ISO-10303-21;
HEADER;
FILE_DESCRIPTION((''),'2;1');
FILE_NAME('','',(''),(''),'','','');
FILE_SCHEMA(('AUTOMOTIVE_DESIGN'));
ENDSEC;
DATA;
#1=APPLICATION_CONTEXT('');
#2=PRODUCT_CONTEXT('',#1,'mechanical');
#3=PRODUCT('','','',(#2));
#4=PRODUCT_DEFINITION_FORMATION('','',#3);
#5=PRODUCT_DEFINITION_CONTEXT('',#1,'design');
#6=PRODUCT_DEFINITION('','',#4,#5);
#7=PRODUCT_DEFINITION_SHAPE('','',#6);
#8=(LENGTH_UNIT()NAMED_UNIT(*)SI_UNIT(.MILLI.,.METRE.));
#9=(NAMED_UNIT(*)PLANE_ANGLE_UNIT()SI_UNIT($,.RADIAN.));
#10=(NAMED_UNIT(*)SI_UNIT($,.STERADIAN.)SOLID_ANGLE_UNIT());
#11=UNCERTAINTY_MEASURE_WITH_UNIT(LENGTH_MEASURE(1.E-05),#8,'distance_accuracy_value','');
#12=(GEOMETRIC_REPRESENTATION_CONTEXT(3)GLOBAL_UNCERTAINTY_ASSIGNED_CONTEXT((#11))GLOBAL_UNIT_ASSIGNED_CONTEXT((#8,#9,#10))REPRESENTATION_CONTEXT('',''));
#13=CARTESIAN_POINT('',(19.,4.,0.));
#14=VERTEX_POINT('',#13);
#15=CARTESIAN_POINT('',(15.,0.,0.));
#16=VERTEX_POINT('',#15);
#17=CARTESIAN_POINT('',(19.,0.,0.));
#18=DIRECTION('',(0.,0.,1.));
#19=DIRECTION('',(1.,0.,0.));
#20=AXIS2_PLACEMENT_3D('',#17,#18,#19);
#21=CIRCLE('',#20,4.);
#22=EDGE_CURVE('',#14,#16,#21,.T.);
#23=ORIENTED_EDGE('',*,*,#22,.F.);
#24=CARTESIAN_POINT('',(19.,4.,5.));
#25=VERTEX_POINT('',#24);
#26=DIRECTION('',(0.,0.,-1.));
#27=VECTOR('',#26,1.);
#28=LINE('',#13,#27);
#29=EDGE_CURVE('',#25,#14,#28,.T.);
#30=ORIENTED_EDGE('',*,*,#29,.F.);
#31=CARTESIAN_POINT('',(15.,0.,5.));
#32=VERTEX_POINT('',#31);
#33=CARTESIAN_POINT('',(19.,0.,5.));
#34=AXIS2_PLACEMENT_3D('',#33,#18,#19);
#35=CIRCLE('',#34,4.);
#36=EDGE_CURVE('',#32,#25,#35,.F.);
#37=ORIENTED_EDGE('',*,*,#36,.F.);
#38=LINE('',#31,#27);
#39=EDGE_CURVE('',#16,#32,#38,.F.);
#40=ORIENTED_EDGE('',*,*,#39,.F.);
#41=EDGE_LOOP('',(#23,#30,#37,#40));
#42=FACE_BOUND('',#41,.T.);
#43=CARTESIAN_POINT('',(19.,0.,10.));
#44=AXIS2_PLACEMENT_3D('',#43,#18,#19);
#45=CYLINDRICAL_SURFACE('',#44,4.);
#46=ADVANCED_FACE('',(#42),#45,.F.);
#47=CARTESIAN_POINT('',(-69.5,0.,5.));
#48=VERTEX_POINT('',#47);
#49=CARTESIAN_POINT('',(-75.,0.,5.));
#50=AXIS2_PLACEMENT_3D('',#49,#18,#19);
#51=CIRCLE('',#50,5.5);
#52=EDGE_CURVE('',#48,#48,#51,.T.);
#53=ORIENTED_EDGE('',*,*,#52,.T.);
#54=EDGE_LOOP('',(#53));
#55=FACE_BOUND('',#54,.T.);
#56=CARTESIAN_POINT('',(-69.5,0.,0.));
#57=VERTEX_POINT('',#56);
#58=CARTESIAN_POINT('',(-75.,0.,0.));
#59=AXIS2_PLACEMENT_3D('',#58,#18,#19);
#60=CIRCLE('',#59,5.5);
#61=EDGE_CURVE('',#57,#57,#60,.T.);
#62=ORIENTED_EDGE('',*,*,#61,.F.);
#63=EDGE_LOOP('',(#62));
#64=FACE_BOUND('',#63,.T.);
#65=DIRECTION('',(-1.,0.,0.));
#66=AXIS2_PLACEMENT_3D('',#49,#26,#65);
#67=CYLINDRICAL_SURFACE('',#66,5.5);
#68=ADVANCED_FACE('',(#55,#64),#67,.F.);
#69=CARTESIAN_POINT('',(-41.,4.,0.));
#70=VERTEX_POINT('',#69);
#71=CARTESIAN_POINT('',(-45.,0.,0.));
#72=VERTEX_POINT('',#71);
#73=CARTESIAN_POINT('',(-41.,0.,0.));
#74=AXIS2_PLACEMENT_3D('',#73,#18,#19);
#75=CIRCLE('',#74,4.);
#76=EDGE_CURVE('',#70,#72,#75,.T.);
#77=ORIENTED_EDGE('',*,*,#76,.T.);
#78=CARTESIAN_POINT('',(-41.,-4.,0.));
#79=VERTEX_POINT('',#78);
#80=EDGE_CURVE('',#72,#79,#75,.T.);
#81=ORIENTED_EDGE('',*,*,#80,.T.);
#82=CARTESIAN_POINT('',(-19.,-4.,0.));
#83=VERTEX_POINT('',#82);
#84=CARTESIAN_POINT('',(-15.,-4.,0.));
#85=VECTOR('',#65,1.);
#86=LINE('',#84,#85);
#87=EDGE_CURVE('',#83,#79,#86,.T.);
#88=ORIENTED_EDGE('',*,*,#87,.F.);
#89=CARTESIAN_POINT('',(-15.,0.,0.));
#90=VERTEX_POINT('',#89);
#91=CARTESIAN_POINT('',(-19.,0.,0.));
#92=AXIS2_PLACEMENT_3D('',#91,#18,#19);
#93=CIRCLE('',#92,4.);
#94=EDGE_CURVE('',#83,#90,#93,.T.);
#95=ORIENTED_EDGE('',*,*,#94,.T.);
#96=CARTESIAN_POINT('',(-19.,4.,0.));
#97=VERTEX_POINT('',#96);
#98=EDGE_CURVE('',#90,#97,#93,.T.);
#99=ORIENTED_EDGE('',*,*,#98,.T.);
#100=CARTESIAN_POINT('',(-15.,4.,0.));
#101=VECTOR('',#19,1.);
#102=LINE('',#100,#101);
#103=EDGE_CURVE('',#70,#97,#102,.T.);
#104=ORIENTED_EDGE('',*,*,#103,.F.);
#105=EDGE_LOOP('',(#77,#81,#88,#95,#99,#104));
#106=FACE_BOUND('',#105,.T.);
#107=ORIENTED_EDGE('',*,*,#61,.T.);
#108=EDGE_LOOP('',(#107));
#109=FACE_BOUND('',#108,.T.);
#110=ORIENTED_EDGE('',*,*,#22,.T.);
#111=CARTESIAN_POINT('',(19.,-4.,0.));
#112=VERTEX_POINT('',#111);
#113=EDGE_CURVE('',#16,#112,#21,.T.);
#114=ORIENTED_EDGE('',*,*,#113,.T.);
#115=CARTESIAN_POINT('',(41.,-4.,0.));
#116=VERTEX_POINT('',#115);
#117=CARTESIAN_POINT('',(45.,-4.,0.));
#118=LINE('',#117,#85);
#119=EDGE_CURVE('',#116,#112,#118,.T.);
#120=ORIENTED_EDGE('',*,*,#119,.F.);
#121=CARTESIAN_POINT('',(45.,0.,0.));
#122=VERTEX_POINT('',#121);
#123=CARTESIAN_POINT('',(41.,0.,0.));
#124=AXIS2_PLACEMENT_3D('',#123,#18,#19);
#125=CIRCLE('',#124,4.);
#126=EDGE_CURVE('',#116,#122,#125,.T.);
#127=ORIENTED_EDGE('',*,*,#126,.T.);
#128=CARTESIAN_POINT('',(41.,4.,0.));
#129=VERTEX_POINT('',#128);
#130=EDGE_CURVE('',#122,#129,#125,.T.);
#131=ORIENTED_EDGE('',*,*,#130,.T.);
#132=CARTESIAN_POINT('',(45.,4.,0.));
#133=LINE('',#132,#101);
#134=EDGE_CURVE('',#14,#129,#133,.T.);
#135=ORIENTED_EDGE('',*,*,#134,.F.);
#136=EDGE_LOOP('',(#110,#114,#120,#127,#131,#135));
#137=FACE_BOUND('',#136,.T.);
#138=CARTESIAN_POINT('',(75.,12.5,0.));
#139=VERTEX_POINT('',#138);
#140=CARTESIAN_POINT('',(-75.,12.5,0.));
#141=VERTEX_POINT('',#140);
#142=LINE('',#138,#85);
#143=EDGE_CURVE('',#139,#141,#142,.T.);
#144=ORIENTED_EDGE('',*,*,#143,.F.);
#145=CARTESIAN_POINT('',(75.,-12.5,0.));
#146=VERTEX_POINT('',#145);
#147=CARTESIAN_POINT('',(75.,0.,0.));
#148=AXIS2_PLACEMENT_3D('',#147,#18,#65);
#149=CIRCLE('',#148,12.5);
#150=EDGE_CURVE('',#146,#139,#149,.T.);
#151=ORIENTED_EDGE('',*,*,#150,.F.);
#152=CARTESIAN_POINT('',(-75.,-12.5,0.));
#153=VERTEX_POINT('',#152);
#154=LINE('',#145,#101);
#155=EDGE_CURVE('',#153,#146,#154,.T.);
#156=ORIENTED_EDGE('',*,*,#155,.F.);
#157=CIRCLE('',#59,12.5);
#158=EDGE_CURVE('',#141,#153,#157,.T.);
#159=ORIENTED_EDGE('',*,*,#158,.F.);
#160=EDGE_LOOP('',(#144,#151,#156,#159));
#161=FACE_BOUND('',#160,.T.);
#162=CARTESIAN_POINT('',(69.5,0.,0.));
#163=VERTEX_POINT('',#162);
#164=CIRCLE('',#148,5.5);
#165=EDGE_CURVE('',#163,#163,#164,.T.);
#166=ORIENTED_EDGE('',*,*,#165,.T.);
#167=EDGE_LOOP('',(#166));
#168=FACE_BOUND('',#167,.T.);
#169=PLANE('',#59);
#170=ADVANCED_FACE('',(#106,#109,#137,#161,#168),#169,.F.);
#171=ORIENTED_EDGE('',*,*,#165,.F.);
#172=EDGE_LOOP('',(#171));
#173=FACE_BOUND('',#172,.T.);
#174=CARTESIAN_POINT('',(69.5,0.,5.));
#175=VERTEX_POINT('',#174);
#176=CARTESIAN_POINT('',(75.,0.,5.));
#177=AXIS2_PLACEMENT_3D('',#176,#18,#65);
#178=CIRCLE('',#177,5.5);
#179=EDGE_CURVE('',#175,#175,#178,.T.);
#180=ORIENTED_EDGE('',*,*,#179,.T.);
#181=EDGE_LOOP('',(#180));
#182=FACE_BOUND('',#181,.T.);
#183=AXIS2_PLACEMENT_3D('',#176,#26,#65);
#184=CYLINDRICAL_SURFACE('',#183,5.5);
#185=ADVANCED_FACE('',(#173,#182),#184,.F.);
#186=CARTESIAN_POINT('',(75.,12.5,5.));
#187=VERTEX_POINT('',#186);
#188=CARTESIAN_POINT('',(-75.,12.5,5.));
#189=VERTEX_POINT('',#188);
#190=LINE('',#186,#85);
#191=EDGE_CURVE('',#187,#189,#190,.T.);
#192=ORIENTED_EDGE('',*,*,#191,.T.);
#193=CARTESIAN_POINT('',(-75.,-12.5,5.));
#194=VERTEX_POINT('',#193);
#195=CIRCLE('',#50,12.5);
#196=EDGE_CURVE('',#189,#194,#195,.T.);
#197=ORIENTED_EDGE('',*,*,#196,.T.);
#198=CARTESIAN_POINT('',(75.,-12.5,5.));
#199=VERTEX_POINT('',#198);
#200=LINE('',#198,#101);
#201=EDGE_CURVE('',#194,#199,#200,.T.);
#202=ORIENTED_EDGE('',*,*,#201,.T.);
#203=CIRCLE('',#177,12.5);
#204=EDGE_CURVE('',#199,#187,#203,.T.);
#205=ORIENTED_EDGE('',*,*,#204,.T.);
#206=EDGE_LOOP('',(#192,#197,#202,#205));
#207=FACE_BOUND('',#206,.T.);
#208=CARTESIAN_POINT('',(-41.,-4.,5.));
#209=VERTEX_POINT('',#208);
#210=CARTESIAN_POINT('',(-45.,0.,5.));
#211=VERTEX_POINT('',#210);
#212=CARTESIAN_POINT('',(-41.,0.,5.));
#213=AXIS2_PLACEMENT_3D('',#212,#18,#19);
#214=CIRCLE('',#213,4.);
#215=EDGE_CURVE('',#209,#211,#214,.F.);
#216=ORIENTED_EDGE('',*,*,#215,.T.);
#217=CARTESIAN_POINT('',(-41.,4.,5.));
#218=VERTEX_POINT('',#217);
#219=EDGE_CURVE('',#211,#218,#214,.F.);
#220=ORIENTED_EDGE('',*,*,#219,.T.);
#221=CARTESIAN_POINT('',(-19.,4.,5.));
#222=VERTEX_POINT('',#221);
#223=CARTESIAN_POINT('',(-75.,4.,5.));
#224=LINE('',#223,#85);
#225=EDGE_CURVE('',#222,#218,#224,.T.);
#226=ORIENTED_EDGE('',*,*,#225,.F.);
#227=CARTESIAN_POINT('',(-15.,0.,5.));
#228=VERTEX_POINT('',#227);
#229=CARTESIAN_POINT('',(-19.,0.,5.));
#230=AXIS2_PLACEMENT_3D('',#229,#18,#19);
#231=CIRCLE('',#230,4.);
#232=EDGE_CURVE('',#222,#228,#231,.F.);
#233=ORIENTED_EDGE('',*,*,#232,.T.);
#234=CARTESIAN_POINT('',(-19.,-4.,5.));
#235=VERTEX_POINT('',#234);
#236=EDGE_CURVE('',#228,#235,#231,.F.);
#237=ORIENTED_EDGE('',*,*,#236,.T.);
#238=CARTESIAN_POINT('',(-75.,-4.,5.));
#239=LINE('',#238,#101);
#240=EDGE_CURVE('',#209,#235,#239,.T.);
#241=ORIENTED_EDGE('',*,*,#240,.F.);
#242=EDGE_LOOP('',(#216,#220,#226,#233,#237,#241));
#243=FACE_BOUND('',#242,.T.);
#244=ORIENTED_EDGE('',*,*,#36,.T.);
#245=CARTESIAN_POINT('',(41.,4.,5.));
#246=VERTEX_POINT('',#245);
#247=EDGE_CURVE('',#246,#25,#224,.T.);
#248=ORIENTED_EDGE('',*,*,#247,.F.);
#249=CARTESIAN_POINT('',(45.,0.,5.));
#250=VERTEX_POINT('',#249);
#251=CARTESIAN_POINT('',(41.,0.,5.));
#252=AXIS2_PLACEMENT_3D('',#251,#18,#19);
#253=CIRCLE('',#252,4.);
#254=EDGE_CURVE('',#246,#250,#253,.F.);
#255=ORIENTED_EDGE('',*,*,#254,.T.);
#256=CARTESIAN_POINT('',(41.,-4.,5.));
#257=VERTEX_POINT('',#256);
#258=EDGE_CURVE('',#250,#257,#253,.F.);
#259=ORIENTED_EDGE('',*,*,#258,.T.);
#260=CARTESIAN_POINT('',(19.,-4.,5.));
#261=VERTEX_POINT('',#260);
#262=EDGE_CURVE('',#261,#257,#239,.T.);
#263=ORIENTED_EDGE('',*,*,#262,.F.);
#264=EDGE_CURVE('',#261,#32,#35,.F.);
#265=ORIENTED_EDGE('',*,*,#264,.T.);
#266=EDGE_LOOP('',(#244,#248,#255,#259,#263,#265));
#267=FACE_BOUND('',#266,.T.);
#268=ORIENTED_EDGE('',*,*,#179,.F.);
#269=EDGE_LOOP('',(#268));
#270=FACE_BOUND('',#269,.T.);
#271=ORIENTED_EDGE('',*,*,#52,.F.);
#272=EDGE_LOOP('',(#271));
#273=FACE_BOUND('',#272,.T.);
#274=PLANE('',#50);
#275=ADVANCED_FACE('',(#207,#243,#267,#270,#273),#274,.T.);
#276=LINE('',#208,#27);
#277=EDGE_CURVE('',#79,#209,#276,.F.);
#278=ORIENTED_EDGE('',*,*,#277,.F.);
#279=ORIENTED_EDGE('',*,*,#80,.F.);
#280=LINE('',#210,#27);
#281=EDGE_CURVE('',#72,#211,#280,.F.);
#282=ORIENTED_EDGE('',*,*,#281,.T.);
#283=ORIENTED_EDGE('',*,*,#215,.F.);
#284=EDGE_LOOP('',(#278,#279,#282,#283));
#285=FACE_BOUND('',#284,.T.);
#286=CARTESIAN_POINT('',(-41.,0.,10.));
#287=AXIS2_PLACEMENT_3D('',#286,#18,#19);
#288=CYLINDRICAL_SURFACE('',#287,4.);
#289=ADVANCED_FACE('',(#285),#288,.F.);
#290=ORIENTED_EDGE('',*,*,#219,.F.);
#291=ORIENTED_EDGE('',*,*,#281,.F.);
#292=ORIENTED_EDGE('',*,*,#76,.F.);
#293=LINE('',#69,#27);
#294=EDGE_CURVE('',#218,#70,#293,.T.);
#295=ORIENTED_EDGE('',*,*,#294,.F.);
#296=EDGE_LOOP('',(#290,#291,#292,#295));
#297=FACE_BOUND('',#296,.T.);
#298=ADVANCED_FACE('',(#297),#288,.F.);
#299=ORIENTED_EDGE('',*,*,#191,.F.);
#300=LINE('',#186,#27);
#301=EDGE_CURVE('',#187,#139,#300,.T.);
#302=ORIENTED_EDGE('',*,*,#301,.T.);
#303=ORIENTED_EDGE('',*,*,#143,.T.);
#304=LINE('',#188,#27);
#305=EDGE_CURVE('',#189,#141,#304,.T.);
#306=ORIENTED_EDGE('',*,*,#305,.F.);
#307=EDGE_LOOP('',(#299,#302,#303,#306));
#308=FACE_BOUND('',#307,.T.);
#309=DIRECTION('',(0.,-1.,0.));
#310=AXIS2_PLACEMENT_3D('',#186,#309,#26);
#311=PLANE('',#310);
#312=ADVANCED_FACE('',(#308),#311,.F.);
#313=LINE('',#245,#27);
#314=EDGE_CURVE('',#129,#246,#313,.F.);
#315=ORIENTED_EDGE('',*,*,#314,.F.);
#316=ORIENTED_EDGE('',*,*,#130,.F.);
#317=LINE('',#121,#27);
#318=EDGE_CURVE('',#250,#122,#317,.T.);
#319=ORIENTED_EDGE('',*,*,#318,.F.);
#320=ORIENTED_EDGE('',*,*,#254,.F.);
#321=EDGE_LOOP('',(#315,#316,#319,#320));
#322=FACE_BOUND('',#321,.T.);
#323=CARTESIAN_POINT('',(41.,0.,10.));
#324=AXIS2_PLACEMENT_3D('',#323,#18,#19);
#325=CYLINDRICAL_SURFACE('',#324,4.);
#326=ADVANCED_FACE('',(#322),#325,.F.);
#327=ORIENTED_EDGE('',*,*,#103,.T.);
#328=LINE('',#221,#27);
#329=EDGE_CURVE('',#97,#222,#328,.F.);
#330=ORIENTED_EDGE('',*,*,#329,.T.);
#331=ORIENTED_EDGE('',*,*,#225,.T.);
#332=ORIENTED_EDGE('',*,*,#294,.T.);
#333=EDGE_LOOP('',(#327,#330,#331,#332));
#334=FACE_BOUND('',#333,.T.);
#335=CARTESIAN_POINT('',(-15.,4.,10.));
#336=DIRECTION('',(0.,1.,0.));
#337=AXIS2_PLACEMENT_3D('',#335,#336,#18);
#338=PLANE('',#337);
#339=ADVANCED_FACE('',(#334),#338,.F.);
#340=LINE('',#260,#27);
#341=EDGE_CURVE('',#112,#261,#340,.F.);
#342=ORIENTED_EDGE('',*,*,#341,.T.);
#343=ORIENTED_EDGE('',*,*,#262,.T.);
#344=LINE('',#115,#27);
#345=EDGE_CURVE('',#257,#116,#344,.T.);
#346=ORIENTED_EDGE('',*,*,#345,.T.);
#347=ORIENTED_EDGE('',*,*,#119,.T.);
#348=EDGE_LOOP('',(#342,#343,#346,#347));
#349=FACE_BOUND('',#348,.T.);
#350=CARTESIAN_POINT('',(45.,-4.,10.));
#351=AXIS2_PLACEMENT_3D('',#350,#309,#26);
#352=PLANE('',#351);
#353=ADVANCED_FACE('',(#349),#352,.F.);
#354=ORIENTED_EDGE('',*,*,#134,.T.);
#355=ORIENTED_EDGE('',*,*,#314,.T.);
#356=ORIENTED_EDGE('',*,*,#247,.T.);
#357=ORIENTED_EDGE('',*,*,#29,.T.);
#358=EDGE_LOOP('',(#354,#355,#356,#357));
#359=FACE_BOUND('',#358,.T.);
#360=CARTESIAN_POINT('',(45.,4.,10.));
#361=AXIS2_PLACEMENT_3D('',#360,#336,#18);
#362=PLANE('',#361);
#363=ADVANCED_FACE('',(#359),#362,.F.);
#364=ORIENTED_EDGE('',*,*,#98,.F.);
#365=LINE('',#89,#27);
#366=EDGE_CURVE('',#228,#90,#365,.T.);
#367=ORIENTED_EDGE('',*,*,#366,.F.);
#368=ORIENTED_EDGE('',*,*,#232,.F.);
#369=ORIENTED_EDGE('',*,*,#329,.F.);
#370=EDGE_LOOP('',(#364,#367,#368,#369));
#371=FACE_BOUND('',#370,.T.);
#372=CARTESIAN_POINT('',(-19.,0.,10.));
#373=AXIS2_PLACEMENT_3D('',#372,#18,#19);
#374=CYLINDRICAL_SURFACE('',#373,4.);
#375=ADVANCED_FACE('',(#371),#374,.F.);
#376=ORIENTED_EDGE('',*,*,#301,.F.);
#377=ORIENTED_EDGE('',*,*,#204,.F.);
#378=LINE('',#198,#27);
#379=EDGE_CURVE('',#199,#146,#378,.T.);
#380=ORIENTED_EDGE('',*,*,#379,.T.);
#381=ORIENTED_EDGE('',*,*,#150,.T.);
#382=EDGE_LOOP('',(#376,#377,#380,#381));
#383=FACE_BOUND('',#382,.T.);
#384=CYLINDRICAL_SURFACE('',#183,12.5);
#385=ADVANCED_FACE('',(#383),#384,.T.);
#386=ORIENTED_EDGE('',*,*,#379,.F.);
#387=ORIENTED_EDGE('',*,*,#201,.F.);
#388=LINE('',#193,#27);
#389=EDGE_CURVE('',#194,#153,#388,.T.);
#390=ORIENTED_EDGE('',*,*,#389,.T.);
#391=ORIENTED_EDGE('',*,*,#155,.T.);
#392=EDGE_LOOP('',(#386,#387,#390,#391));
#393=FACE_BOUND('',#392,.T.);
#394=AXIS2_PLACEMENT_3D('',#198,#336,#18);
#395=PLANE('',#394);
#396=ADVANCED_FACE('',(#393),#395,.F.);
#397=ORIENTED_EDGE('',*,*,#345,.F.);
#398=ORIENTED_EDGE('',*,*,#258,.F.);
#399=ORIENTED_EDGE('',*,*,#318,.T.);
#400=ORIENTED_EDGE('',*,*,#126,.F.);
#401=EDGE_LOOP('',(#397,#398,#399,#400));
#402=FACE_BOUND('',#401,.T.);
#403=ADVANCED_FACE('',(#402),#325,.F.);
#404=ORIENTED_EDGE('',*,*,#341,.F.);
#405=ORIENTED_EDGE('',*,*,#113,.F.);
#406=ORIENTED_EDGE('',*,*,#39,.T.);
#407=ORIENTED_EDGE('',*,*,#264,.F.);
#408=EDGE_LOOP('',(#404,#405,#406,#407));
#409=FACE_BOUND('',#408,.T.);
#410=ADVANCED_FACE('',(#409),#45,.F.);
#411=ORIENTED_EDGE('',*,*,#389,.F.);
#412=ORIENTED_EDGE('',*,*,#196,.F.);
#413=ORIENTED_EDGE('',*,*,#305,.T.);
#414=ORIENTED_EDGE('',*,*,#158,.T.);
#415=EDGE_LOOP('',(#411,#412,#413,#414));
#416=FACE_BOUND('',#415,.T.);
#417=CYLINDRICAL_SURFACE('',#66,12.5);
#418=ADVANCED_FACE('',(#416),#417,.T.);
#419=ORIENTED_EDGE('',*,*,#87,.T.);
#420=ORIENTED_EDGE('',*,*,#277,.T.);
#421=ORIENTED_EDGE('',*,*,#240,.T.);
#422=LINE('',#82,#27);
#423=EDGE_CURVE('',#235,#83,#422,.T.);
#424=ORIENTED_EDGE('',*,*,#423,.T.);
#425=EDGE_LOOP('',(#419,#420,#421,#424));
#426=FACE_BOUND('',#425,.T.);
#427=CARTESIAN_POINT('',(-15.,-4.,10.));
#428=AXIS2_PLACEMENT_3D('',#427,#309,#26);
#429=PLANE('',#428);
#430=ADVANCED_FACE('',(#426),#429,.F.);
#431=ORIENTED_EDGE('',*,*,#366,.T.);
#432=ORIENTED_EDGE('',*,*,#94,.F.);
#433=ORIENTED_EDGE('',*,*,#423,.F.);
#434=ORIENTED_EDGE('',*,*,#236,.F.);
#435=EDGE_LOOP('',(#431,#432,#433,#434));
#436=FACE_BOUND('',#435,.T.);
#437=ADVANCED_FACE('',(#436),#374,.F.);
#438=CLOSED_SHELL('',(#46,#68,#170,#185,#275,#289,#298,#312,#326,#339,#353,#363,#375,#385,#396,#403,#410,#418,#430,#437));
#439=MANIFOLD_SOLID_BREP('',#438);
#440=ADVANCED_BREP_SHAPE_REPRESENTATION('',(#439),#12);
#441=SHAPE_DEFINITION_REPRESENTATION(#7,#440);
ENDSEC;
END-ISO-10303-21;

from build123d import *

# Parameters (mm, degrees)
SKETCH1_R           = 5.5
BOSS_EXTRUDE1_DEPTH = 5
SKETCH2_W           = 30
SKETCH2_H           = 8
CUT_EXTRUDE1_DEPTH  = 10
FILLET1_R           = 4


with BuildPart() as part:
    # Sketch1 → Boss-Extrude1 (new body)
    with BuildSketch(Plane.XY):
        with BuildLine():
            Line((75, 12.5), (-75, 12.5))
            ThreePointArc((-75, 12.5), (-87.5, 0), (-75, -12.5))
            Line((-75, -12.5), (75, -12.5))
            ThreePointArc((75, -12.5), (87.5, 0), (75, 12.5))
        make_face()
        with Locations((-75, 0)):
            Circle(SKETCH1_R, mode=Mode.SUBTRACT)
        with Locations(Location((75, 0, 0), (0, 0, 180))):
            Circle(SKETCH1_R, mode=Mode.SUBTRACT)
    extrude(amount=BOSS_EXTRUDE1_DEPTH)

    # Sketch2 → Cut-Extrude1 (cut)
    with BuildSketch(Plane(origin=(0, 0, 0), x_dir=(-1, 0, 0), z_dir=(0, 0, -1))):
        with Locations((-30, 0)):
            Rectangle(SKETCH2_W, SKETCH2_H)
        with Locations((30, 0)):
            Rectangle(SKETCH2_W, SKETCH2_H)
    extrude(amount=-CUT_EXTRUDE1_DEPTH, mode=Mode.SUBTRACT)

    # Fillet1
    fillet1_edges = [part.edges().sort_by_distance(p)[0] for p in [
        (15, -4, 2.5),
        (45, -4, 2.5),
        (45, 4, 2.5),
        (15, 4, 2.5),
        (-45, -4, 2.5),
        (-15, -4, 2.5),
        (-15, 4, 2.5),
        (-45, 4, 2.5),
    ]]
    fillet(fillet1_edges, radius=FILLET1_R - 0.0001)  # a hair under: the kernel refuses the full size


solid = part.part
